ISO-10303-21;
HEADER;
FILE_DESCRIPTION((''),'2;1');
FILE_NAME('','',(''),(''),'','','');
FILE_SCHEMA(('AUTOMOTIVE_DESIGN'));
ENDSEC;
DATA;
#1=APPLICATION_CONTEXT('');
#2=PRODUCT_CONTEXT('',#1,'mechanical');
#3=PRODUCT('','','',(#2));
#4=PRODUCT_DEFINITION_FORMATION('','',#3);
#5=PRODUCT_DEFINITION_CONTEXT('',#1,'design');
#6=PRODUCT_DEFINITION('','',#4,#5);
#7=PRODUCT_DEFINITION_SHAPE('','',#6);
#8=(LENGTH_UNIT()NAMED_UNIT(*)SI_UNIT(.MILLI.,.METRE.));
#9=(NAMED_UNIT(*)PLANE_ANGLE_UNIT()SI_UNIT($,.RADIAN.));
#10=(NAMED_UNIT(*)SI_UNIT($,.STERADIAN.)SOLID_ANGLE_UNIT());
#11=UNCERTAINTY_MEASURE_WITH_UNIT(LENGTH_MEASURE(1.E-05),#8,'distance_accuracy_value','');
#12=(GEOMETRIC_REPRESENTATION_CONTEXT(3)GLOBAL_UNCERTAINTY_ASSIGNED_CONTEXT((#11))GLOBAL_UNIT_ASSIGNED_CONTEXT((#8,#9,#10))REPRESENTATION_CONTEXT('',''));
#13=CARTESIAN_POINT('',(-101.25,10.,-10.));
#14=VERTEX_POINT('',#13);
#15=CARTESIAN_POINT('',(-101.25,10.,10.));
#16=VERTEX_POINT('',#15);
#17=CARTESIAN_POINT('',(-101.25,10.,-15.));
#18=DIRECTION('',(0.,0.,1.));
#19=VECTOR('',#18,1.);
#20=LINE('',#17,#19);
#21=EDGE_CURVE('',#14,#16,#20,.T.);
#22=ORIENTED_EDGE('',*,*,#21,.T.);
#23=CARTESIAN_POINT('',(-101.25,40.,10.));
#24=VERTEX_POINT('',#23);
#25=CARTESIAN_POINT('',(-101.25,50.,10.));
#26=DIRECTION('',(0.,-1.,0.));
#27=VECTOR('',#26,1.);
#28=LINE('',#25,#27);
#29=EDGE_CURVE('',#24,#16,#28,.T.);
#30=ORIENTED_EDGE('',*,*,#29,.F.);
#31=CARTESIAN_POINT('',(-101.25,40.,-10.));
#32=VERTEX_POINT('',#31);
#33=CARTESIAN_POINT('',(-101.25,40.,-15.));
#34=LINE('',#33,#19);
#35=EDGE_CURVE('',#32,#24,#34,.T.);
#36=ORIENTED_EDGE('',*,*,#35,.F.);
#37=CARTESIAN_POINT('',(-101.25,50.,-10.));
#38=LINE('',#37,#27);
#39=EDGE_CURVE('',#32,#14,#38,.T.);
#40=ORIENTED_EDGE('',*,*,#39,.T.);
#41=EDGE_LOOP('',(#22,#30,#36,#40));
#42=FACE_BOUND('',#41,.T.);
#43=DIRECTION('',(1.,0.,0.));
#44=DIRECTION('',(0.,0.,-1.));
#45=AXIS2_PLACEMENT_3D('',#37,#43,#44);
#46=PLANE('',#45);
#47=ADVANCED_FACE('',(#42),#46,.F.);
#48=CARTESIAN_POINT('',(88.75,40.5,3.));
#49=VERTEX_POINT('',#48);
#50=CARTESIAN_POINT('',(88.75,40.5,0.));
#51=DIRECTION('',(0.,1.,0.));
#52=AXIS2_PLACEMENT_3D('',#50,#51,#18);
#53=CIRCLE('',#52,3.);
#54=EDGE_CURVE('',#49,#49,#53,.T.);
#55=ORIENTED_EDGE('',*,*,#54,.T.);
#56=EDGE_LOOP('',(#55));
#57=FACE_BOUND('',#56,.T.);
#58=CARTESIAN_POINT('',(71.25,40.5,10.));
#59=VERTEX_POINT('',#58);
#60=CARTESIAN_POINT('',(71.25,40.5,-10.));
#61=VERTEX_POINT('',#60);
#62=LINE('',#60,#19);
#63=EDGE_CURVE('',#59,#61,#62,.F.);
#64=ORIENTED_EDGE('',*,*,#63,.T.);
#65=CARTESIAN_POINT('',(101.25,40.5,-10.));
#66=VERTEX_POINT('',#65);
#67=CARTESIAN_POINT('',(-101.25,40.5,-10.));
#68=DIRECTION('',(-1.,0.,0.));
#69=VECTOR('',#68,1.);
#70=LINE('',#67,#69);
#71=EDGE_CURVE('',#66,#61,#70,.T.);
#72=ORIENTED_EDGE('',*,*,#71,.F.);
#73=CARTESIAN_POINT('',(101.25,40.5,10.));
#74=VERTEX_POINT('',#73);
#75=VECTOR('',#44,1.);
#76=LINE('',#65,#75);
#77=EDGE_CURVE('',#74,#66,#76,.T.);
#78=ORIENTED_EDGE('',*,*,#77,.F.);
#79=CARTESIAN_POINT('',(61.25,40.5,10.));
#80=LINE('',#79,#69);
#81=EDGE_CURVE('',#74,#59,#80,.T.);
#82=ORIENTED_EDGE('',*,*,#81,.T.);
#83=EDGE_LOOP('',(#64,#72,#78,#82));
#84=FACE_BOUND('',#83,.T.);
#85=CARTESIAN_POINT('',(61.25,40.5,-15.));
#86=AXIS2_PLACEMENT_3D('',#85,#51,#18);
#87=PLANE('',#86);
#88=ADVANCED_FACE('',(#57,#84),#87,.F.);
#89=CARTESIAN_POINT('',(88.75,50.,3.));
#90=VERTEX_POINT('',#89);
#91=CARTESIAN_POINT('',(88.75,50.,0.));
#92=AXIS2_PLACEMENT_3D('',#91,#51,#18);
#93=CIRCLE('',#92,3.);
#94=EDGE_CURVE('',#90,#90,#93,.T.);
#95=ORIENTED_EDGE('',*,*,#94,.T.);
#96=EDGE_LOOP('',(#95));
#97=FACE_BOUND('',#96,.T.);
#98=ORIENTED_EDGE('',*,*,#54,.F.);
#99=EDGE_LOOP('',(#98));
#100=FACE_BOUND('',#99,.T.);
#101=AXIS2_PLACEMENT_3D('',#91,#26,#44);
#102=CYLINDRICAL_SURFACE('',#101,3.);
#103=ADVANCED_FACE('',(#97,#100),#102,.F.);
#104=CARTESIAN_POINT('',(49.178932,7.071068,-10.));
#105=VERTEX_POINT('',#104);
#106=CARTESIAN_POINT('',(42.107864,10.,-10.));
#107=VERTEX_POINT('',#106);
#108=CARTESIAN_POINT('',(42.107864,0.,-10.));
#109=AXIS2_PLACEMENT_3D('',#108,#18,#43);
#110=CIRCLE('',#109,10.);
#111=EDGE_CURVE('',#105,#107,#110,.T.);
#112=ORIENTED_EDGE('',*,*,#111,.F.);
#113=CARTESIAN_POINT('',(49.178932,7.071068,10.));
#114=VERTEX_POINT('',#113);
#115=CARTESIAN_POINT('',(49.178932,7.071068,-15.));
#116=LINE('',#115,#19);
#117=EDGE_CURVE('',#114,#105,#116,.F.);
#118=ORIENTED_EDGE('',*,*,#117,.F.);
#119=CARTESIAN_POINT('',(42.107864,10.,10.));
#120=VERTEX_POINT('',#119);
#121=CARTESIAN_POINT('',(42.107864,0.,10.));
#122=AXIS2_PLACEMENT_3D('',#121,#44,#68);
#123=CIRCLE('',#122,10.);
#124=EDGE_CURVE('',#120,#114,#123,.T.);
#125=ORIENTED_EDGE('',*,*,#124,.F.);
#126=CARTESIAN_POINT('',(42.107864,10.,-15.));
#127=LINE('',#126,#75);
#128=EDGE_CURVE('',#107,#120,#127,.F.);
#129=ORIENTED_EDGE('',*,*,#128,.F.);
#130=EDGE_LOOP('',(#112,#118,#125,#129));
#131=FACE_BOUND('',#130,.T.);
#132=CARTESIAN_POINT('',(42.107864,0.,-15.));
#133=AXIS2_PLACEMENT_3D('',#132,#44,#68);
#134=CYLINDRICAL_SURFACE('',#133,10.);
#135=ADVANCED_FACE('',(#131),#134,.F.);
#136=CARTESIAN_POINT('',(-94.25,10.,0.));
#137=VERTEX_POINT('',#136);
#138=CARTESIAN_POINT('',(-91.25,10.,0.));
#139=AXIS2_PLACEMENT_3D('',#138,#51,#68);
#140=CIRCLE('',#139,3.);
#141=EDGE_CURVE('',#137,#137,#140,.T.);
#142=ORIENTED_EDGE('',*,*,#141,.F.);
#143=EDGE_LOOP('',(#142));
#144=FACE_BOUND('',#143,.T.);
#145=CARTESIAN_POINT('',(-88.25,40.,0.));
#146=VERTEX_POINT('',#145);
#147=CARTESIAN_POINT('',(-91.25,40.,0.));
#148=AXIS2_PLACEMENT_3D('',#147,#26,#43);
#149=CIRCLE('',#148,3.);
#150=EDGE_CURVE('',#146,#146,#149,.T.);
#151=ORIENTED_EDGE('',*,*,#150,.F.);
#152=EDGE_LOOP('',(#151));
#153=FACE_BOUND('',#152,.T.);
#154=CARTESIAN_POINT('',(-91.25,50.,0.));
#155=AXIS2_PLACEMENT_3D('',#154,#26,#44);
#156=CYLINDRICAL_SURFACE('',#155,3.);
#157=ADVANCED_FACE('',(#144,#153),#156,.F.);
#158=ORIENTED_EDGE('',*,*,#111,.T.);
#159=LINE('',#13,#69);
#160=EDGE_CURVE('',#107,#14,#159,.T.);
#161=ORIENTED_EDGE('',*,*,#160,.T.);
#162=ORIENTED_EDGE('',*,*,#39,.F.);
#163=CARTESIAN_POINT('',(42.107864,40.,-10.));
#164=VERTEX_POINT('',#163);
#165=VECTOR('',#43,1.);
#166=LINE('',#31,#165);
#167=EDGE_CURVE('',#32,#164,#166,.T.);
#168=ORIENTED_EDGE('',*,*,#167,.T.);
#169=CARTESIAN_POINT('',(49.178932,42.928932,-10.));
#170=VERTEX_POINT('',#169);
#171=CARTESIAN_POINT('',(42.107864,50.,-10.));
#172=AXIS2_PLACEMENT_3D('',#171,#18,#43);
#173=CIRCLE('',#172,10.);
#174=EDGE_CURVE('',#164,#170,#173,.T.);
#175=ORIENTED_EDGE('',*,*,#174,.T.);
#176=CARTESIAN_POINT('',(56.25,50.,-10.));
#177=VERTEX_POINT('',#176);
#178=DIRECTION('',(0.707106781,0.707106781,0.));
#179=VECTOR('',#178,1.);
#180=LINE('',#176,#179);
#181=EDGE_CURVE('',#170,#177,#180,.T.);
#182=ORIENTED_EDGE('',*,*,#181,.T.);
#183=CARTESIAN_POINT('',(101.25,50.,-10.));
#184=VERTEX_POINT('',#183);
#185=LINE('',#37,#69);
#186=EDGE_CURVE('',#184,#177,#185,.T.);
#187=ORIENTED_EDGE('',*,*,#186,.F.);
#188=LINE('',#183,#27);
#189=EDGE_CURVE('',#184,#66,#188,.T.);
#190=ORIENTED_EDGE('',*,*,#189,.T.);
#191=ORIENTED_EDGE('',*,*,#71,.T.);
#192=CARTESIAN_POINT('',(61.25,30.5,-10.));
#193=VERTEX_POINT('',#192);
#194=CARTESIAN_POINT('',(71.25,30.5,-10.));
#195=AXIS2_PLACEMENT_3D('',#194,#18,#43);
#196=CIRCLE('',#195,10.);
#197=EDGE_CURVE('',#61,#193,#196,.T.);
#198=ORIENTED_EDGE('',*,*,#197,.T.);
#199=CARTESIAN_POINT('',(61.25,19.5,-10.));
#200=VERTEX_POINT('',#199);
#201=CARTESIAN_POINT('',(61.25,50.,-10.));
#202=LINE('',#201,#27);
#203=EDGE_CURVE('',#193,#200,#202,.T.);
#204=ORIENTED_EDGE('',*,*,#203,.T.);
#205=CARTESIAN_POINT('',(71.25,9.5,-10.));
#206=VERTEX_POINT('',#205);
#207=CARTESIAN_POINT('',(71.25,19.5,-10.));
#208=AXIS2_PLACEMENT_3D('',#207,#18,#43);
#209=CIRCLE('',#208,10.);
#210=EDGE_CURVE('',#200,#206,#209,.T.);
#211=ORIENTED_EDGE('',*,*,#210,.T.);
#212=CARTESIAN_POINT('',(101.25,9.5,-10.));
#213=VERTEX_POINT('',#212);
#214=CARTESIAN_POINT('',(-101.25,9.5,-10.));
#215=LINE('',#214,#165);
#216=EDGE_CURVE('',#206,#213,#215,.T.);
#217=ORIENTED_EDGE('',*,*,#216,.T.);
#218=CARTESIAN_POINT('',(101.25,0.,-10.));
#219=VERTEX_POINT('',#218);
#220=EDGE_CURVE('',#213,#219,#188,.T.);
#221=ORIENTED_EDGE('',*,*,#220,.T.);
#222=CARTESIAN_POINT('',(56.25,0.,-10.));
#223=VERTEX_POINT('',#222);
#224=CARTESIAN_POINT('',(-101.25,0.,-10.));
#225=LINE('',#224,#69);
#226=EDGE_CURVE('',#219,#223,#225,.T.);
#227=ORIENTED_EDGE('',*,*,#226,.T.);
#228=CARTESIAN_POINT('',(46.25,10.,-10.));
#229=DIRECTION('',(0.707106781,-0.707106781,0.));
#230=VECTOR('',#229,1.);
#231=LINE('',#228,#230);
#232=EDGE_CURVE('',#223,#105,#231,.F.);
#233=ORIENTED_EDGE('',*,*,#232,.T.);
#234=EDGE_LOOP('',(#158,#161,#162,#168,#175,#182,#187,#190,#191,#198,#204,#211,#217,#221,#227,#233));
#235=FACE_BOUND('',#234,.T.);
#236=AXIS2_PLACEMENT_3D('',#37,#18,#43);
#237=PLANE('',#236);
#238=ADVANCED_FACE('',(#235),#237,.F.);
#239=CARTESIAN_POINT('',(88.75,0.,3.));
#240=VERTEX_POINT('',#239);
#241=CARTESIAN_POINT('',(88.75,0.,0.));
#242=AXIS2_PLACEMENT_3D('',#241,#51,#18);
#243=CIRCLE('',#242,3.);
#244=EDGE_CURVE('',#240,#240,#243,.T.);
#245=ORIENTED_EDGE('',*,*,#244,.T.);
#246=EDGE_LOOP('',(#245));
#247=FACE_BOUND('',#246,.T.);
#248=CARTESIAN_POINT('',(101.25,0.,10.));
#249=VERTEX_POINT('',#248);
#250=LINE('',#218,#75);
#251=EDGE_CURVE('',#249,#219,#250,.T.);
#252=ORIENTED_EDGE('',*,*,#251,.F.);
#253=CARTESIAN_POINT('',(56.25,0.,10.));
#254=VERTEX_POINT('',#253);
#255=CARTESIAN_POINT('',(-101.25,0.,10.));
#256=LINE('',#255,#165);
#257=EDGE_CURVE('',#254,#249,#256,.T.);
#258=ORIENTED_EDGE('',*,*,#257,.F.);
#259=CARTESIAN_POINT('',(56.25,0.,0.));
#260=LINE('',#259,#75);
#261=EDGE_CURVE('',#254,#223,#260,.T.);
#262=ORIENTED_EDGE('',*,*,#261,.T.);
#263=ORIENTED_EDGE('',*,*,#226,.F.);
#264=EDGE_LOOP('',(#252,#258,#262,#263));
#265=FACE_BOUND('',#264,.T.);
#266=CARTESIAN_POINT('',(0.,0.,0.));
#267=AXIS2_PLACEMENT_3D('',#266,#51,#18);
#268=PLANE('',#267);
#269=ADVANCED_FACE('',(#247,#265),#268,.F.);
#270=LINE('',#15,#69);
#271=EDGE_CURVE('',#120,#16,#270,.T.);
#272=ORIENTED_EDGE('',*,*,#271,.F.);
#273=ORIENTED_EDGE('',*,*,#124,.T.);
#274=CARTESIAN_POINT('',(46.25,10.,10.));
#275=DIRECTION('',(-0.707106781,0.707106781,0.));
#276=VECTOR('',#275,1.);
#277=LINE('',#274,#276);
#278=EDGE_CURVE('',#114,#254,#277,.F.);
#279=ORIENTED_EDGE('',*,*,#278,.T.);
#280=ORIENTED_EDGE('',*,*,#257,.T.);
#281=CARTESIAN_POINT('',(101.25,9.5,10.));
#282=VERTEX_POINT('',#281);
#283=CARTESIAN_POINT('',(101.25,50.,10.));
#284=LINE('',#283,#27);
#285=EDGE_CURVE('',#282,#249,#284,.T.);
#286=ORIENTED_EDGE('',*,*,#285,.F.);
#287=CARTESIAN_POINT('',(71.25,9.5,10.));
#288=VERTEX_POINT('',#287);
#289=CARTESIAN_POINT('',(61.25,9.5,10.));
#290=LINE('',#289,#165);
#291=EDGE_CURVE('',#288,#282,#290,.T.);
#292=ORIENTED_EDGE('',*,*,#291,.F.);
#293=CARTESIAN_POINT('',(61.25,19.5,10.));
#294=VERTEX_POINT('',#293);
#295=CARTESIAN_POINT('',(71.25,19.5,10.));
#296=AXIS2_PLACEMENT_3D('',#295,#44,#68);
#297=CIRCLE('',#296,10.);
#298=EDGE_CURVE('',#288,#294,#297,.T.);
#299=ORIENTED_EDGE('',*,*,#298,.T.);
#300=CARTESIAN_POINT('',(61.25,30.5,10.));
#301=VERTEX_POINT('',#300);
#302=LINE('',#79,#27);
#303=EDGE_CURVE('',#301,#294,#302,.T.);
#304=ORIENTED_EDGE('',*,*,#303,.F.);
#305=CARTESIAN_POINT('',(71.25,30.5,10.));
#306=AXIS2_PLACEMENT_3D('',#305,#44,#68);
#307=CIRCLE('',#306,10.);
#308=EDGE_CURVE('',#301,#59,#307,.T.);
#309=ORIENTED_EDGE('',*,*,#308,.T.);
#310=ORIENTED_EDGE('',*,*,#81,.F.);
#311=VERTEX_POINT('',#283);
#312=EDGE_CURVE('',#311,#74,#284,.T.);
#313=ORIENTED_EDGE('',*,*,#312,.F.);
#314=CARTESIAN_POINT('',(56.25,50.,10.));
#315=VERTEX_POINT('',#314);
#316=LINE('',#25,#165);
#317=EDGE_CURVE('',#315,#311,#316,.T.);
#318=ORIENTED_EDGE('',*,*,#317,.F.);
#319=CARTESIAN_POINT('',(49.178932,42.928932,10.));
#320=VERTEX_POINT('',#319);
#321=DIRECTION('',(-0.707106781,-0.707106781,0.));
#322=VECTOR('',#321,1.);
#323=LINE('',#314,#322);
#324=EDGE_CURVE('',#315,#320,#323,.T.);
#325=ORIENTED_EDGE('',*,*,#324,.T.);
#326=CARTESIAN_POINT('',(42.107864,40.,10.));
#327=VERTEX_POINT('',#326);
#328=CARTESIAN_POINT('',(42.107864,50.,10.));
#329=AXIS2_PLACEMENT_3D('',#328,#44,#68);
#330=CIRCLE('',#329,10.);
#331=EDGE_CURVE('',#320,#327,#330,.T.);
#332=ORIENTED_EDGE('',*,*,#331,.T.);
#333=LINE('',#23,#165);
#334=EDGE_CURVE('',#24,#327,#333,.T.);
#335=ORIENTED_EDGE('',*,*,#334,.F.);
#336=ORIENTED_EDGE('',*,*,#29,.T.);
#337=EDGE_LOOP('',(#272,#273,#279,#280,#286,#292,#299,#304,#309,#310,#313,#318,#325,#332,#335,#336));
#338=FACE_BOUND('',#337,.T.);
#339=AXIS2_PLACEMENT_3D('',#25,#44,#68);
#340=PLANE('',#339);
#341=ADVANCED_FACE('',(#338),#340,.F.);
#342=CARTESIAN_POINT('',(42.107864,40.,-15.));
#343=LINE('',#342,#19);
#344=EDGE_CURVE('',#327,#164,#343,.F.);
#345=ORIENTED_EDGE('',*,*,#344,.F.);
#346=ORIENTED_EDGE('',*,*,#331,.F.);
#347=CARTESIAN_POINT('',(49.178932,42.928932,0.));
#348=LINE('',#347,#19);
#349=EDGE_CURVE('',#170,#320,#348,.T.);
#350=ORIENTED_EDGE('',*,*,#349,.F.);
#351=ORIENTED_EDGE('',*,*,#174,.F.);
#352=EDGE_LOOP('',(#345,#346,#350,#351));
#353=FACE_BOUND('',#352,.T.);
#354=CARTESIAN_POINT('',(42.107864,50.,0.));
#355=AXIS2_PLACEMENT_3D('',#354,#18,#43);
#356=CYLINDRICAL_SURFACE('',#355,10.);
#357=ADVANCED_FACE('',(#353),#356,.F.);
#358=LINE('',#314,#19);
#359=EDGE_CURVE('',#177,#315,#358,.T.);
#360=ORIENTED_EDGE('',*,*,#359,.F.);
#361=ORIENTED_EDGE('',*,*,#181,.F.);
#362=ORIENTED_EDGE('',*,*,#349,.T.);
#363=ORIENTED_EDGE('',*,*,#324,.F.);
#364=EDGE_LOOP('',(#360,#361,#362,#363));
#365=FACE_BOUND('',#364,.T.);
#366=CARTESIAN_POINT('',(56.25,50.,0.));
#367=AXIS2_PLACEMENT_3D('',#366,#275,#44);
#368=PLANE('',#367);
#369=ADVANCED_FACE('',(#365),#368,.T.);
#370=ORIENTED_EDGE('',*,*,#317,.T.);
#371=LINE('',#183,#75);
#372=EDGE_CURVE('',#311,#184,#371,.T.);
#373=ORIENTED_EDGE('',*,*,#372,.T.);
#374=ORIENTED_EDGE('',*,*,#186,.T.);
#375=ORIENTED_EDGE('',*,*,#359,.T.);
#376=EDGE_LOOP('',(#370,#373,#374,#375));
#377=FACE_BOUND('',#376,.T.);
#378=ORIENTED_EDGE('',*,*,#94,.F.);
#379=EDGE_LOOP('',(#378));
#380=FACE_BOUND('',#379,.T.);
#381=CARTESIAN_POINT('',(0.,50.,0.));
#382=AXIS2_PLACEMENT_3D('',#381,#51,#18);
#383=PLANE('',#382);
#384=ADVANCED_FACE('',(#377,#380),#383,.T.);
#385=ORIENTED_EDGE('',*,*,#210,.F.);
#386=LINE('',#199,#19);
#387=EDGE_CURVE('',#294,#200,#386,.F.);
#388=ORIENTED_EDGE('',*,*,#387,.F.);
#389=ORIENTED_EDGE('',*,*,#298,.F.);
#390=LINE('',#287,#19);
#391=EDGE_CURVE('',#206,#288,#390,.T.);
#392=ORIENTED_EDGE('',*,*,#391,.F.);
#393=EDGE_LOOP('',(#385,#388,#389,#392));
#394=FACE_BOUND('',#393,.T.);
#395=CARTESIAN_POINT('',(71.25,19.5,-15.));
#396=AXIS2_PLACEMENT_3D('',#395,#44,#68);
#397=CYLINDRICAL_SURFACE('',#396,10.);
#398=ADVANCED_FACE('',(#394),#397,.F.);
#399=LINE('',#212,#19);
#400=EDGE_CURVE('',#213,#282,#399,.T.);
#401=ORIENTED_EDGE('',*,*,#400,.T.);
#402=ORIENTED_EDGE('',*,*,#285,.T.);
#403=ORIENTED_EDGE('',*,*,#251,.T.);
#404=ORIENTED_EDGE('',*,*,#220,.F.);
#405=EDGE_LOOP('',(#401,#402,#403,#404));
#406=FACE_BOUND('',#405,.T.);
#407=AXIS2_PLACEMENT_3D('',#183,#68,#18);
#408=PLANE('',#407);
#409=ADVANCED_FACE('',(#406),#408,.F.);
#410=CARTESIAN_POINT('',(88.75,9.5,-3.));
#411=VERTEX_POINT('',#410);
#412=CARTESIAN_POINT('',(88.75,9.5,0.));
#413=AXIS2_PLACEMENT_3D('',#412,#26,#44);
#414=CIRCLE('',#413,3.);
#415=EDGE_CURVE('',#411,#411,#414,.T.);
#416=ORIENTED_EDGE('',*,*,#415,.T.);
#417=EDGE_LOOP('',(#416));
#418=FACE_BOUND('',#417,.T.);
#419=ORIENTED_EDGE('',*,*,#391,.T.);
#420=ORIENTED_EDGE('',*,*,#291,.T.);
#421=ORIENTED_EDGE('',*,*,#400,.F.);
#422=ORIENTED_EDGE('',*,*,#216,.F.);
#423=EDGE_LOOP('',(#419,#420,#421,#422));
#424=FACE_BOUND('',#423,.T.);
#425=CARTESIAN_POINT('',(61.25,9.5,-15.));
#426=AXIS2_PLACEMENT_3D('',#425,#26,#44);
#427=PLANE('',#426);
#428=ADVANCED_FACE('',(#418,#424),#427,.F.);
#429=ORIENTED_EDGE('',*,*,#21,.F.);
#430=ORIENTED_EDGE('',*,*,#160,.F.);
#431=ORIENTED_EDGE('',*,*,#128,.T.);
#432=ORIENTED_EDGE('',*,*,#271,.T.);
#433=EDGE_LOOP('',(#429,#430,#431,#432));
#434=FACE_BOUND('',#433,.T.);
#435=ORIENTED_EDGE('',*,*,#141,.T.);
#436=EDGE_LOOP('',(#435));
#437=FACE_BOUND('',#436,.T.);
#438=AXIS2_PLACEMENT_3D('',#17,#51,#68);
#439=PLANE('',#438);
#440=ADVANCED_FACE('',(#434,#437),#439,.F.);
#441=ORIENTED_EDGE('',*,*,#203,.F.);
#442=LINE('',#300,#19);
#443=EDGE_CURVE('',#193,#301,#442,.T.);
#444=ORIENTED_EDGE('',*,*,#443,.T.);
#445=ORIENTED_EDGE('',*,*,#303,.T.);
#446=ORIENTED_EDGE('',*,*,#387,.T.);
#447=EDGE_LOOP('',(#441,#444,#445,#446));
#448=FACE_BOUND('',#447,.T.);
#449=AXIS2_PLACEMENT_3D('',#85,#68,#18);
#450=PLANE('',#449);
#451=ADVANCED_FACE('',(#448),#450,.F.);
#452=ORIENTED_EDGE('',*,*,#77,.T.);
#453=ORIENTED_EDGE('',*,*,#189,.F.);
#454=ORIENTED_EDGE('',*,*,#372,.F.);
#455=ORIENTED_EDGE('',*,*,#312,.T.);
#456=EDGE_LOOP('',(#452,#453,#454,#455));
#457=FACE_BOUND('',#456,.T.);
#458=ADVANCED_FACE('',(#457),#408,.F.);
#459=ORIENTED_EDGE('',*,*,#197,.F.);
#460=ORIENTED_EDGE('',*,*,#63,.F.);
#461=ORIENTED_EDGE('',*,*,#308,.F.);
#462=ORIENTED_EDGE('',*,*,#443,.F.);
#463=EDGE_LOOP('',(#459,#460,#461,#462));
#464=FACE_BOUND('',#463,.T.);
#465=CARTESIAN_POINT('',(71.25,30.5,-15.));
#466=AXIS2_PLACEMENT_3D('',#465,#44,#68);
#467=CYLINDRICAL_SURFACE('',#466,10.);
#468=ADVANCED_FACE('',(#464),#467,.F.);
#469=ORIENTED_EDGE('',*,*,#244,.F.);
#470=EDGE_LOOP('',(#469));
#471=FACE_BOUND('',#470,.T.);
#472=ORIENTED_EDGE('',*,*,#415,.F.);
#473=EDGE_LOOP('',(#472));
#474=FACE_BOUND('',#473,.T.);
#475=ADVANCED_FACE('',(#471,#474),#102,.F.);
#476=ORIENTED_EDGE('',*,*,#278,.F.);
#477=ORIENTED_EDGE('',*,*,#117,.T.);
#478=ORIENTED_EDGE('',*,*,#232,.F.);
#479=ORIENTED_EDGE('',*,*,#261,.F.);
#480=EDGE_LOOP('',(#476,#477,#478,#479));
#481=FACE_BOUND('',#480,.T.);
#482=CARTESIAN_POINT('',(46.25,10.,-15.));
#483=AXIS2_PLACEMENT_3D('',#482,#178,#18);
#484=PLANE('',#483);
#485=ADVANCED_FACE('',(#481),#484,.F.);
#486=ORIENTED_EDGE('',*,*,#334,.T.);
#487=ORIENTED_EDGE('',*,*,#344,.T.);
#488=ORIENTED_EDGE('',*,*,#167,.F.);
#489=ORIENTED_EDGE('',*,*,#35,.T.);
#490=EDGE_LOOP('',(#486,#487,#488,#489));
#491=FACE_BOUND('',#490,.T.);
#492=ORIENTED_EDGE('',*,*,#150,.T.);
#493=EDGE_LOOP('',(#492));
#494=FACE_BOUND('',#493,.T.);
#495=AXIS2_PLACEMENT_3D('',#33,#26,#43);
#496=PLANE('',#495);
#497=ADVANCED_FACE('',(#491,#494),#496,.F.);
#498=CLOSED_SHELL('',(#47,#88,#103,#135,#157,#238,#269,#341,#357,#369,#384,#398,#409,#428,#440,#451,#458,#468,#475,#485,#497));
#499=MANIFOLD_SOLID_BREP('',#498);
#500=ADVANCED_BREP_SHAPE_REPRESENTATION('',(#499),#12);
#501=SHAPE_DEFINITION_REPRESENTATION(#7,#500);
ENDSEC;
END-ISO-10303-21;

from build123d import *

# Parameters (mm, degrees)
SKETCH1_W           = 202.5
SKETCH1_H           = 20
SKETCH1_R           = 3
BOSS_EXTRUDE1_DEPTH = 50
SKETCH2_W           = 80
SKETCH2_H           = 31
SKETCH2_W_2         = 147.5
SKETCH2_H_2         = 10
CUT_EXTRUDE1_DEPTH  = 25
CHAMFER1_SIZE       = 10
FILLET1_R           = 10
FILLET2_START       = -10
FILLET2_DEPTH       = 20


with BuildPart() as part:
    # Sketch1 → Boss-Extrude1 (new body)
    with BuildSketch(Plane(origin=(0, 0, 0), x_dir=(1, 0, 0), z_dir=(0, 1, 0))):
        Rectangle(SKETCH1_W, SKETCH1_H)
        with Locations(Location((-91.25, 0, 0), (0, 0, 270))):
            Circle(SKETCH1_R, mode=Mode.SUBTRACT)
        with Locations(Location((88.75, 0, 0), (0, 0, 270))):
            Circle(SKETCH1_R, mode=Mode.SUBTRACT)
    extrude(amount=BOSS_EXTRUDE1_DEPTH)

    # Sketch2 → Cut-Extrude1 (cut)
    with BuildSketch(Plane.XY.offset(10)):
        with Locations((101.25, 25)):
            Rectangle(SKETCH2_W, SKETCH2_H)
        with Locations((-27.5, 45)):
            Rectangle(SKETCH2_W_2, SKETCH2_H_2)
        with Locations((-27.5, 5)):
            Rectangle(SKETCH2_W_2, SKETCH2_H_2)
    extrude(amount=-CUT_EXTRUDE1_DEPTH, mode=Mode.SUBTRACT)

    # Chamfer1
    chamfer1_edges = [part.edges().sort_by_distance(p)[0] for p in [
        (46.25, 0, 0),
        (46.25, 50, 0),
    ]]
    chamfer(chamfer1_edges, length=CHAMFER1_SIZE - 0.0001)  # a hair under: the kernel refuses the full size

    # Fillet1
    fillet1_edges = [part.edges().sort_by_distance(p)[0] for p in [
        (61.25, 9.5, 0),
        (61.25, 40.5, 0),
    ]]
    fillet(fillet1_edges, radius=FILLET1_R)

    # Fillet2: read off the stored shape, not the designer's step
    # Fillet2 outline → Fillet2 (add)
    with BuildSketch(Plane.XY.offset(FILLET2_START)):
        with BuildLine():
            ThreePointArc((49.178932188, 42.928932188), (45.9346987, 40.761204675), (42.107864376, 40))
            Line((42.107864376, 40), (46.25, 40))
            Line((46.25, 40), (49.178932188, 42.928932188))
        make_face()
        with BuildLine():
            Line((46.25, 10), (42.107864376, 10))
            ThreePointArc((42.107864376, 10), (45.9346987, 9.238795325), (49.178932188, 7.071067812))
            Line((49.178932188, 7.071067812), (46.25, 10))
        make_face()
    extrude(amount=FILLET2_DEPTH)


solid = part.part
